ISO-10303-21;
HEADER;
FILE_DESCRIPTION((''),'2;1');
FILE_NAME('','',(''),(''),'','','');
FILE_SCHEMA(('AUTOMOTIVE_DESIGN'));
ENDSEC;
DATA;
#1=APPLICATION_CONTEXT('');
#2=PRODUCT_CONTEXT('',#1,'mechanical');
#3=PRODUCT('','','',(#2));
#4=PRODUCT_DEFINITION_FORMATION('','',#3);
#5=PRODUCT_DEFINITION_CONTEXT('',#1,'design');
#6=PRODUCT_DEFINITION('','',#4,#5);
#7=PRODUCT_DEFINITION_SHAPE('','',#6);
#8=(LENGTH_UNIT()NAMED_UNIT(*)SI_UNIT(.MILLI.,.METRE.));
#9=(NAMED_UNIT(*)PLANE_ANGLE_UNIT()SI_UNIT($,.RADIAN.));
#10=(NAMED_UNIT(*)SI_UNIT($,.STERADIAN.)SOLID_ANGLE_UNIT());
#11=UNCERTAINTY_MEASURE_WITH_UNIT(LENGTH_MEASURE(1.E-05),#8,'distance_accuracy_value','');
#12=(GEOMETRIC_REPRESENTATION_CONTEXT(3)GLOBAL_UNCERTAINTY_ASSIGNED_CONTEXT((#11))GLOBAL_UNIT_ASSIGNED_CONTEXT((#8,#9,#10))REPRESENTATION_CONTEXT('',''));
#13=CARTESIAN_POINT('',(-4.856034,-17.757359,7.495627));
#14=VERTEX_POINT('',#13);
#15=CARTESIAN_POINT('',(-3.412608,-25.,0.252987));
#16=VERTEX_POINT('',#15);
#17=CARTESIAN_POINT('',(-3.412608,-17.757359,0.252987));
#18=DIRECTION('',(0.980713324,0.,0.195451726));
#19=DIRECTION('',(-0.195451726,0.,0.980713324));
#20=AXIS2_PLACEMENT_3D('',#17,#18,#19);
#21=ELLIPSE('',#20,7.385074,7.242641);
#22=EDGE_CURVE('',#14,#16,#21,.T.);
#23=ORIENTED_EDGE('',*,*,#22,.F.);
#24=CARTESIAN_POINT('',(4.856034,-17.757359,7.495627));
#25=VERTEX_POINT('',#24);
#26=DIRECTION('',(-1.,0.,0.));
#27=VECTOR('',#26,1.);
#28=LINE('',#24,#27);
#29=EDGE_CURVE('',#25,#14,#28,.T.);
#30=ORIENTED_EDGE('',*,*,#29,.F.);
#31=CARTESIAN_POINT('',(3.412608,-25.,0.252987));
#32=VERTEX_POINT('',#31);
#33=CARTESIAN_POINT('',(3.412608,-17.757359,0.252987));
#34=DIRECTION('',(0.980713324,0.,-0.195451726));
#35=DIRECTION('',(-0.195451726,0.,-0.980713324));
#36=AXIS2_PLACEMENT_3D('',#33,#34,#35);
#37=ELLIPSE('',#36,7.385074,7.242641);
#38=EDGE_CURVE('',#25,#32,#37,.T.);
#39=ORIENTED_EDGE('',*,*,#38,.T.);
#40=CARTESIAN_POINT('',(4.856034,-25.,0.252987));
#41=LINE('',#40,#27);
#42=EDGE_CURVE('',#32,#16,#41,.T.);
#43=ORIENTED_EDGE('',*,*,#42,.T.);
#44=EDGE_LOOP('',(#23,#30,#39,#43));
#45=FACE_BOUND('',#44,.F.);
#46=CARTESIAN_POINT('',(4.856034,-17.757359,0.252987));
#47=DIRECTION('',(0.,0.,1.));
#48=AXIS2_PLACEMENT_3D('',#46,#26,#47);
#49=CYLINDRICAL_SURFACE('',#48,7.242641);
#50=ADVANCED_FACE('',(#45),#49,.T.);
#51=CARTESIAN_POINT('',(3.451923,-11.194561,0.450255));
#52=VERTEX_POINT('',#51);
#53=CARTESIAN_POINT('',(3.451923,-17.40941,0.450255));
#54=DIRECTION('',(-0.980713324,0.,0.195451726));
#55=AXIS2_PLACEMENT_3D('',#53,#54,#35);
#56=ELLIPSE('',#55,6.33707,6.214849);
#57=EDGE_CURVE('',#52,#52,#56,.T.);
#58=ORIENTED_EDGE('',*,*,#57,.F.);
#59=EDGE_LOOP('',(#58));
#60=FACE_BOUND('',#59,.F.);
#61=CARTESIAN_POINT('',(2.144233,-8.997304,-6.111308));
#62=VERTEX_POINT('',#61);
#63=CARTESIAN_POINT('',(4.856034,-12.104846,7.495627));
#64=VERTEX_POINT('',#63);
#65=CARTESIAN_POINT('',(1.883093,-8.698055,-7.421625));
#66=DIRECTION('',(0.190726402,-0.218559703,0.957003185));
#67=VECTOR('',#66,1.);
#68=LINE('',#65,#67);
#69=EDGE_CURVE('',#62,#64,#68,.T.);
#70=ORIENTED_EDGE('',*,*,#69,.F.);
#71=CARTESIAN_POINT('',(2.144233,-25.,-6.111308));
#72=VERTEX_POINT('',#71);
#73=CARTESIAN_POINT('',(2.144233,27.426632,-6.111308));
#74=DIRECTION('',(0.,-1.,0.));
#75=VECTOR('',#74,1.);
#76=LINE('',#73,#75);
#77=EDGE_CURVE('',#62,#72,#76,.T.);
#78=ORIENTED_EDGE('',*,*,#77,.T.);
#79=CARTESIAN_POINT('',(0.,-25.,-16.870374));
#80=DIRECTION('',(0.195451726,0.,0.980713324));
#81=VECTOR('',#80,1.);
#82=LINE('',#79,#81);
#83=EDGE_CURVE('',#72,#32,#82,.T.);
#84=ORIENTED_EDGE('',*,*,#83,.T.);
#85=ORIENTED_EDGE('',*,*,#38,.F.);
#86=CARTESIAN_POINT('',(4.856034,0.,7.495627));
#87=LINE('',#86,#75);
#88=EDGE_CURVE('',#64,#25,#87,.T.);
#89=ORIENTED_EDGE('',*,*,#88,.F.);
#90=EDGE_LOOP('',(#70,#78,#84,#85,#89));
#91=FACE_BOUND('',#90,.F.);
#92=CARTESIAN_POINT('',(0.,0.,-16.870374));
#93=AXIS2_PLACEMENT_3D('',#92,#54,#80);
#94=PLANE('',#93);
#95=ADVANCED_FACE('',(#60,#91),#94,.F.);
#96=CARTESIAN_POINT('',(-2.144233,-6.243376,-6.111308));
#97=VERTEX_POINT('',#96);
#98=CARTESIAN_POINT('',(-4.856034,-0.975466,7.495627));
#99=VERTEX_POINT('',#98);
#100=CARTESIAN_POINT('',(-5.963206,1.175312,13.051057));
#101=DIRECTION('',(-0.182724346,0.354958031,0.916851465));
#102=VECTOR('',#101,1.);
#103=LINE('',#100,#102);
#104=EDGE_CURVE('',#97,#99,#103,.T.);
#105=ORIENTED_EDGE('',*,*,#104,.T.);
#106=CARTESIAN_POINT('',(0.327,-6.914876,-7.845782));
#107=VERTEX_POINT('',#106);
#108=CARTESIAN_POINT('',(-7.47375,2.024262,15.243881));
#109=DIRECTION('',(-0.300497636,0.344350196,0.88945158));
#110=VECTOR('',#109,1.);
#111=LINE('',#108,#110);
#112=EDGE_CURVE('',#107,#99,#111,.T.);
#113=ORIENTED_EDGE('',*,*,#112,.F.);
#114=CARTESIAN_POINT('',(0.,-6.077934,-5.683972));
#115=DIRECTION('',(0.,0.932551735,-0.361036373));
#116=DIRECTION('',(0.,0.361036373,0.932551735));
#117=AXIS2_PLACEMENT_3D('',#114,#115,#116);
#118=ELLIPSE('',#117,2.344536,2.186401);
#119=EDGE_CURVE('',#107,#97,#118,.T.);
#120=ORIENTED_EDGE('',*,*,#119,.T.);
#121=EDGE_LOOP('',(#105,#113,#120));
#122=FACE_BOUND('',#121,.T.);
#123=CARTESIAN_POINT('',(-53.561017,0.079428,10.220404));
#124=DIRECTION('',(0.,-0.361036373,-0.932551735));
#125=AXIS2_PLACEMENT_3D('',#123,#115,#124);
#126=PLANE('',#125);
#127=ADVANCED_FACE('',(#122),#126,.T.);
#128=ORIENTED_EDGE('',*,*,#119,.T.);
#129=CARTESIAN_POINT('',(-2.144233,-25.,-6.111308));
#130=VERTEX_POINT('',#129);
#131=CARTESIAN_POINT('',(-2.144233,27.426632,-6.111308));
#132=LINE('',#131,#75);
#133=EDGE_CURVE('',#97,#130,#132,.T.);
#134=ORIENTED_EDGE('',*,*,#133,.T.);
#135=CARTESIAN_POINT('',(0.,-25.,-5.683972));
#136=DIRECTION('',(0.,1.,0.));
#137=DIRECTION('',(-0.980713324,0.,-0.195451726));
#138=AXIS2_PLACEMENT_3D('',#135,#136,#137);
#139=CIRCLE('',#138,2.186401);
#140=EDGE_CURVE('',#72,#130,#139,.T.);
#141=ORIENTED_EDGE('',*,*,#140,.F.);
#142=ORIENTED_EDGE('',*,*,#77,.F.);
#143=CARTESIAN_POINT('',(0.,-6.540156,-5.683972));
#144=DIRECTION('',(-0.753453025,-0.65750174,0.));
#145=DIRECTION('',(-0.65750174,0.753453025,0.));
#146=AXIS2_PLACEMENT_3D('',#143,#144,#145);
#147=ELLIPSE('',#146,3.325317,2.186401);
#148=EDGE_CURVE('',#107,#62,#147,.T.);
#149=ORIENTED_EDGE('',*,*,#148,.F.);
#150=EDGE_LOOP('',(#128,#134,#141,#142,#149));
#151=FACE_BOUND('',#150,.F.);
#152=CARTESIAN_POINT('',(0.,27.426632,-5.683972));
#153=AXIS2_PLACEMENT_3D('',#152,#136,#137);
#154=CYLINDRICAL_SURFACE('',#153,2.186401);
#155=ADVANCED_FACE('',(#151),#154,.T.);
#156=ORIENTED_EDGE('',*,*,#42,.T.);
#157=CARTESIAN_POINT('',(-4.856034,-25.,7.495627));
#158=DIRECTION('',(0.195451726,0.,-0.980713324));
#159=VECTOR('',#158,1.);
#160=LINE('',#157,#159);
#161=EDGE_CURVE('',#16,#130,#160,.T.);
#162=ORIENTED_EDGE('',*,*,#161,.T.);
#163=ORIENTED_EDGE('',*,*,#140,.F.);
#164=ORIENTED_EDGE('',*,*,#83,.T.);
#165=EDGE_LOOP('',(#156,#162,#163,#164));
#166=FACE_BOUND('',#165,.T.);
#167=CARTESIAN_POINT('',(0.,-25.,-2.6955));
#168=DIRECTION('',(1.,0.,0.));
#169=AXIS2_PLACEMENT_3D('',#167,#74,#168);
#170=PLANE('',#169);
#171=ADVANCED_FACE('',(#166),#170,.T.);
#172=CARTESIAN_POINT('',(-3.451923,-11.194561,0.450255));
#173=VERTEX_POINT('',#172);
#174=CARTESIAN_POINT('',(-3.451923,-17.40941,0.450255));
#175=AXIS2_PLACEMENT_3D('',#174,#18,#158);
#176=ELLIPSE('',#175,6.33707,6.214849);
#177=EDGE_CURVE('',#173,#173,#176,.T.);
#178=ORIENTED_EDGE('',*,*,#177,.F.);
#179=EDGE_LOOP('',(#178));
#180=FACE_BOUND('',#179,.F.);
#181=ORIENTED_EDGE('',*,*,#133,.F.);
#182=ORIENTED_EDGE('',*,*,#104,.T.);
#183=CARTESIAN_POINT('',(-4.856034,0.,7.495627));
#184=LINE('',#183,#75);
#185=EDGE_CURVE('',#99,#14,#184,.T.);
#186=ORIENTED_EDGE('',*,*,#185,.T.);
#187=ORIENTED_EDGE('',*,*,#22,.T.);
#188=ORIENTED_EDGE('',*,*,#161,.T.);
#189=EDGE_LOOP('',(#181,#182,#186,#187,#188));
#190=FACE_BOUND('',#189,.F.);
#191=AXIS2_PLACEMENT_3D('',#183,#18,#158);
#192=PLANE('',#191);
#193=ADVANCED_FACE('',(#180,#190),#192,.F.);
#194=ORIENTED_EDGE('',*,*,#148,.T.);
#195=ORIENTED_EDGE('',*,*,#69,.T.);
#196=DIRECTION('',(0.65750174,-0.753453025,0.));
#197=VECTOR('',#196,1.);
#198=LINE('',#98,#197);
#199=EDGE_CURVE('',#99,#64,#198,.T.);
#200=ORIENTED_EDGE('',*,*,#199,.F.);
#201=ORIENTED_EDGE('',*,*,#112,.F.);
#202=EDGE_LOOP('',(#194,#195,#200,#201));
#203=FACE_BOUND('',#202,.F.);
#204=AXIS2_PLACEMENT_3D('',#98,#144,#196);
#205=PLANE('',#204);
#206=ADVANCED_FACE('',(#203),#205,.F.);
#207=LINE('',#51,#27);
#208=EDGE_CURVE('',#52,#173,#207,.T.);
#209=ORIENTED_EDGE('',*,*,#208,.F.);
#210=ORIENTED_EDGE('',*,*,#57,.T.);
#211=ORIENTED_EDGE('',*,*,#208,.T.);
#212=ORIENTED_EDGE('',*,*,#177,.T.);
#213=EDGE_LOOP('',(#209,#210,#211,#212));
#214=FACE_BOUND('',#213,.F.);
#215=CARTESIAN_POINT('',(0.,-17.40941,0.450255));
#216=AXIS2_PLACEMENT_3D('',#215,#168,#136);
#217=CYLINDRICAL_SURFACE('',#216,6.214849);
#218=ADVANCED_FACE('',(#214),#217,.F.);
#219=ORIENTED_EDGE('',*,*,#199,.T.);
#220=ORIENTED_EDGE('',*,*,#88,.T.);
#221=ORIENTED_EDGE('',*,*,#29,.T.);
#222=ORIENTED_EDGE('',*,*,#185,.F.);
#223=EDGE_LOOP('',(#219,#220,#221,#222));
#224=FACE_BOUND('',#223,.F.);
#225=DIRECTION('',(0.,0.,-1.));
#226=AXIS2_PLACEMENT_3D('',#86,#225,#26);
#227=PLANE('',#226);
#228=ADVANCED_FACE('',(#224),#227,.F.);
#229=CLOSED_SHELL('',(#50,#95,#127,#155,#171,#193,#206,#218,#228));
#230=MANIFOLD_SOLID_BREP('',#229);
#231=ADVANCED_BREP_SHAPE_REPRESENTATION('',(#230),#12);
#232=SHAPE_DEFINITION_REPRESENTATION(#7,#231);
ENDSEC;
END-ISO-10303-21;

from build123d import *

# Parameters (mm, degrees)
F1_DEPTH      = 25
F2_T1_DEPTH   = 79.8532648187
F4_DEPTH      = 25
F4_DEPTH_BACK = 25
F5_T1_DEPTH   = 107.1220330496
F7_DEPTH      = 25
F8_R          = 6.2148490945
F9_DEPTH      = 25
F9_DEPTH_BACK = 25
F10_R         = 7.2426406871


# Not quite as in the source:
# - a fillet or chamfer that OpenCascade refuses, or shapes differently, is made with other operations: its cross-section is extruded or revolved along the edge and cut away or added


with BuildPart() as f1:
    # F0 (on Front) → F1 (new body)
    with BuildSketch(Plane.XZ):
        Polygon((4.8560337164, 7.4956272729), (0, 7.4956272729), (-4.8560337164, 7.4956272729), (0, -16.87037386), align=None)
    extrude(amount=F1_DEPTH)

    # F2: fillet of radius 2.1864014695 on 1 edges, made by hand

    # F2_s2 → F2_t1 (cut)
    with BuildSketch(Plane.XZ.offset(-27.4266324093)):
        with BuildLine():
            ThreePointArc((-2.1442330518, -6.1113083304), (0, -7.87037386), (2.1442330518, -6.1113083304))
            Line((2.1442330518, -6.1113083304), (0, -16.87037386))
            Line((0, -16.87037386), (-2.1442330518, -6.1113083304))
        make_face()
    extrude(amount=F2_T1_DEPTH, mode=Mode.SUBTRACT)

    # F3 (on Right) → F4 (cut, two sides)
    with BuildSketch(Plane.YZ) as f4_sk:
        with BuildLine():
            ThreePointArc((1.5301647967, 9.1992565168), (-4.4063240448, -7.9303751627), (-16.6751330548, -21.2773788233))
            Line((-16.6751330548, -21.2773788233), (1.5301647967, -21.2773788233))
            Line((1.5301647967, -21.2773788233), (1.5301647967, 9.1992565168))
        make_face()
    extrude(amount=-F4_DEPTH, mode=Mode.SUBTRACT)
    extrude(f4_sk.sketch, amount=F4_DEPTH_BACK, mode=Mode.SUBTRACT)

    # F5: chamfer of 5.5 on 1 edges, made by hand

    # F5_s2 → F5_t1 (cut)
    with BuildSketch(Plane.YZ.offset(-53.5610165248)):
        with BuildLine():
            Line((0.079428002, 10.2204041802), (-9.7965992647, -15.2892315683))
            Line((-9.7965992647, -15.2892315683), (-9.7152756624, -15.3633022893))
            ThreePointArc((-9.7152756624, -15.3633022893), (-3.8594523105, -7.2118040219), (0.1053121044, 2.0189976591))
            Line((0.1053121044, 2.0189976591), (0.11, 2.0507680961))
            ThreePointArc((0.11, 2.0507680961), (0.11, 6.1355861381), (0.189428002, 10.2204041802))
            Line((0.189428002, 10.2204041802), (0.079428002, 10.2204041802))
        make_face()
    extrude(amount=F5_T1_DEPTH, mode=Mode.SUBTRACT)

    # F6 (on face) → F7 (cut)
    with BuildSketch(Plane.XY.offset(7.4956272729)):
        Polygon((7.9051312059, 6.1967439927), (-4.8560337164, -0.9754663641), (7.9051312059, -15.5989079942), align=None)
    extrude(amount=-F7_DEPTH, mode=Mode.SUBTRACT)

    # F8 (on Right) → F9 (cut, two sides)
    with BuildSketch(Plane.YZ) as f9_sk:
        with Locations((-17.4094103277, 0.4502551164)):
            Circle(F8_R)
    extrude(amount=F9_DEPTH, mode=Mode.SUBTRACT)
    extrude(f9_sk.sketch, amount=-F9_DEPTH_BACK, mode=Mode.SUBTRACT)

    # F10
    f10_edges = [f1.edges().sort_by_distance(p)[0] for p in [
        (0, -25, 7.495627),
    ]]
    fillet(f10_edges, radius=F10_R)


solid = f1.part
